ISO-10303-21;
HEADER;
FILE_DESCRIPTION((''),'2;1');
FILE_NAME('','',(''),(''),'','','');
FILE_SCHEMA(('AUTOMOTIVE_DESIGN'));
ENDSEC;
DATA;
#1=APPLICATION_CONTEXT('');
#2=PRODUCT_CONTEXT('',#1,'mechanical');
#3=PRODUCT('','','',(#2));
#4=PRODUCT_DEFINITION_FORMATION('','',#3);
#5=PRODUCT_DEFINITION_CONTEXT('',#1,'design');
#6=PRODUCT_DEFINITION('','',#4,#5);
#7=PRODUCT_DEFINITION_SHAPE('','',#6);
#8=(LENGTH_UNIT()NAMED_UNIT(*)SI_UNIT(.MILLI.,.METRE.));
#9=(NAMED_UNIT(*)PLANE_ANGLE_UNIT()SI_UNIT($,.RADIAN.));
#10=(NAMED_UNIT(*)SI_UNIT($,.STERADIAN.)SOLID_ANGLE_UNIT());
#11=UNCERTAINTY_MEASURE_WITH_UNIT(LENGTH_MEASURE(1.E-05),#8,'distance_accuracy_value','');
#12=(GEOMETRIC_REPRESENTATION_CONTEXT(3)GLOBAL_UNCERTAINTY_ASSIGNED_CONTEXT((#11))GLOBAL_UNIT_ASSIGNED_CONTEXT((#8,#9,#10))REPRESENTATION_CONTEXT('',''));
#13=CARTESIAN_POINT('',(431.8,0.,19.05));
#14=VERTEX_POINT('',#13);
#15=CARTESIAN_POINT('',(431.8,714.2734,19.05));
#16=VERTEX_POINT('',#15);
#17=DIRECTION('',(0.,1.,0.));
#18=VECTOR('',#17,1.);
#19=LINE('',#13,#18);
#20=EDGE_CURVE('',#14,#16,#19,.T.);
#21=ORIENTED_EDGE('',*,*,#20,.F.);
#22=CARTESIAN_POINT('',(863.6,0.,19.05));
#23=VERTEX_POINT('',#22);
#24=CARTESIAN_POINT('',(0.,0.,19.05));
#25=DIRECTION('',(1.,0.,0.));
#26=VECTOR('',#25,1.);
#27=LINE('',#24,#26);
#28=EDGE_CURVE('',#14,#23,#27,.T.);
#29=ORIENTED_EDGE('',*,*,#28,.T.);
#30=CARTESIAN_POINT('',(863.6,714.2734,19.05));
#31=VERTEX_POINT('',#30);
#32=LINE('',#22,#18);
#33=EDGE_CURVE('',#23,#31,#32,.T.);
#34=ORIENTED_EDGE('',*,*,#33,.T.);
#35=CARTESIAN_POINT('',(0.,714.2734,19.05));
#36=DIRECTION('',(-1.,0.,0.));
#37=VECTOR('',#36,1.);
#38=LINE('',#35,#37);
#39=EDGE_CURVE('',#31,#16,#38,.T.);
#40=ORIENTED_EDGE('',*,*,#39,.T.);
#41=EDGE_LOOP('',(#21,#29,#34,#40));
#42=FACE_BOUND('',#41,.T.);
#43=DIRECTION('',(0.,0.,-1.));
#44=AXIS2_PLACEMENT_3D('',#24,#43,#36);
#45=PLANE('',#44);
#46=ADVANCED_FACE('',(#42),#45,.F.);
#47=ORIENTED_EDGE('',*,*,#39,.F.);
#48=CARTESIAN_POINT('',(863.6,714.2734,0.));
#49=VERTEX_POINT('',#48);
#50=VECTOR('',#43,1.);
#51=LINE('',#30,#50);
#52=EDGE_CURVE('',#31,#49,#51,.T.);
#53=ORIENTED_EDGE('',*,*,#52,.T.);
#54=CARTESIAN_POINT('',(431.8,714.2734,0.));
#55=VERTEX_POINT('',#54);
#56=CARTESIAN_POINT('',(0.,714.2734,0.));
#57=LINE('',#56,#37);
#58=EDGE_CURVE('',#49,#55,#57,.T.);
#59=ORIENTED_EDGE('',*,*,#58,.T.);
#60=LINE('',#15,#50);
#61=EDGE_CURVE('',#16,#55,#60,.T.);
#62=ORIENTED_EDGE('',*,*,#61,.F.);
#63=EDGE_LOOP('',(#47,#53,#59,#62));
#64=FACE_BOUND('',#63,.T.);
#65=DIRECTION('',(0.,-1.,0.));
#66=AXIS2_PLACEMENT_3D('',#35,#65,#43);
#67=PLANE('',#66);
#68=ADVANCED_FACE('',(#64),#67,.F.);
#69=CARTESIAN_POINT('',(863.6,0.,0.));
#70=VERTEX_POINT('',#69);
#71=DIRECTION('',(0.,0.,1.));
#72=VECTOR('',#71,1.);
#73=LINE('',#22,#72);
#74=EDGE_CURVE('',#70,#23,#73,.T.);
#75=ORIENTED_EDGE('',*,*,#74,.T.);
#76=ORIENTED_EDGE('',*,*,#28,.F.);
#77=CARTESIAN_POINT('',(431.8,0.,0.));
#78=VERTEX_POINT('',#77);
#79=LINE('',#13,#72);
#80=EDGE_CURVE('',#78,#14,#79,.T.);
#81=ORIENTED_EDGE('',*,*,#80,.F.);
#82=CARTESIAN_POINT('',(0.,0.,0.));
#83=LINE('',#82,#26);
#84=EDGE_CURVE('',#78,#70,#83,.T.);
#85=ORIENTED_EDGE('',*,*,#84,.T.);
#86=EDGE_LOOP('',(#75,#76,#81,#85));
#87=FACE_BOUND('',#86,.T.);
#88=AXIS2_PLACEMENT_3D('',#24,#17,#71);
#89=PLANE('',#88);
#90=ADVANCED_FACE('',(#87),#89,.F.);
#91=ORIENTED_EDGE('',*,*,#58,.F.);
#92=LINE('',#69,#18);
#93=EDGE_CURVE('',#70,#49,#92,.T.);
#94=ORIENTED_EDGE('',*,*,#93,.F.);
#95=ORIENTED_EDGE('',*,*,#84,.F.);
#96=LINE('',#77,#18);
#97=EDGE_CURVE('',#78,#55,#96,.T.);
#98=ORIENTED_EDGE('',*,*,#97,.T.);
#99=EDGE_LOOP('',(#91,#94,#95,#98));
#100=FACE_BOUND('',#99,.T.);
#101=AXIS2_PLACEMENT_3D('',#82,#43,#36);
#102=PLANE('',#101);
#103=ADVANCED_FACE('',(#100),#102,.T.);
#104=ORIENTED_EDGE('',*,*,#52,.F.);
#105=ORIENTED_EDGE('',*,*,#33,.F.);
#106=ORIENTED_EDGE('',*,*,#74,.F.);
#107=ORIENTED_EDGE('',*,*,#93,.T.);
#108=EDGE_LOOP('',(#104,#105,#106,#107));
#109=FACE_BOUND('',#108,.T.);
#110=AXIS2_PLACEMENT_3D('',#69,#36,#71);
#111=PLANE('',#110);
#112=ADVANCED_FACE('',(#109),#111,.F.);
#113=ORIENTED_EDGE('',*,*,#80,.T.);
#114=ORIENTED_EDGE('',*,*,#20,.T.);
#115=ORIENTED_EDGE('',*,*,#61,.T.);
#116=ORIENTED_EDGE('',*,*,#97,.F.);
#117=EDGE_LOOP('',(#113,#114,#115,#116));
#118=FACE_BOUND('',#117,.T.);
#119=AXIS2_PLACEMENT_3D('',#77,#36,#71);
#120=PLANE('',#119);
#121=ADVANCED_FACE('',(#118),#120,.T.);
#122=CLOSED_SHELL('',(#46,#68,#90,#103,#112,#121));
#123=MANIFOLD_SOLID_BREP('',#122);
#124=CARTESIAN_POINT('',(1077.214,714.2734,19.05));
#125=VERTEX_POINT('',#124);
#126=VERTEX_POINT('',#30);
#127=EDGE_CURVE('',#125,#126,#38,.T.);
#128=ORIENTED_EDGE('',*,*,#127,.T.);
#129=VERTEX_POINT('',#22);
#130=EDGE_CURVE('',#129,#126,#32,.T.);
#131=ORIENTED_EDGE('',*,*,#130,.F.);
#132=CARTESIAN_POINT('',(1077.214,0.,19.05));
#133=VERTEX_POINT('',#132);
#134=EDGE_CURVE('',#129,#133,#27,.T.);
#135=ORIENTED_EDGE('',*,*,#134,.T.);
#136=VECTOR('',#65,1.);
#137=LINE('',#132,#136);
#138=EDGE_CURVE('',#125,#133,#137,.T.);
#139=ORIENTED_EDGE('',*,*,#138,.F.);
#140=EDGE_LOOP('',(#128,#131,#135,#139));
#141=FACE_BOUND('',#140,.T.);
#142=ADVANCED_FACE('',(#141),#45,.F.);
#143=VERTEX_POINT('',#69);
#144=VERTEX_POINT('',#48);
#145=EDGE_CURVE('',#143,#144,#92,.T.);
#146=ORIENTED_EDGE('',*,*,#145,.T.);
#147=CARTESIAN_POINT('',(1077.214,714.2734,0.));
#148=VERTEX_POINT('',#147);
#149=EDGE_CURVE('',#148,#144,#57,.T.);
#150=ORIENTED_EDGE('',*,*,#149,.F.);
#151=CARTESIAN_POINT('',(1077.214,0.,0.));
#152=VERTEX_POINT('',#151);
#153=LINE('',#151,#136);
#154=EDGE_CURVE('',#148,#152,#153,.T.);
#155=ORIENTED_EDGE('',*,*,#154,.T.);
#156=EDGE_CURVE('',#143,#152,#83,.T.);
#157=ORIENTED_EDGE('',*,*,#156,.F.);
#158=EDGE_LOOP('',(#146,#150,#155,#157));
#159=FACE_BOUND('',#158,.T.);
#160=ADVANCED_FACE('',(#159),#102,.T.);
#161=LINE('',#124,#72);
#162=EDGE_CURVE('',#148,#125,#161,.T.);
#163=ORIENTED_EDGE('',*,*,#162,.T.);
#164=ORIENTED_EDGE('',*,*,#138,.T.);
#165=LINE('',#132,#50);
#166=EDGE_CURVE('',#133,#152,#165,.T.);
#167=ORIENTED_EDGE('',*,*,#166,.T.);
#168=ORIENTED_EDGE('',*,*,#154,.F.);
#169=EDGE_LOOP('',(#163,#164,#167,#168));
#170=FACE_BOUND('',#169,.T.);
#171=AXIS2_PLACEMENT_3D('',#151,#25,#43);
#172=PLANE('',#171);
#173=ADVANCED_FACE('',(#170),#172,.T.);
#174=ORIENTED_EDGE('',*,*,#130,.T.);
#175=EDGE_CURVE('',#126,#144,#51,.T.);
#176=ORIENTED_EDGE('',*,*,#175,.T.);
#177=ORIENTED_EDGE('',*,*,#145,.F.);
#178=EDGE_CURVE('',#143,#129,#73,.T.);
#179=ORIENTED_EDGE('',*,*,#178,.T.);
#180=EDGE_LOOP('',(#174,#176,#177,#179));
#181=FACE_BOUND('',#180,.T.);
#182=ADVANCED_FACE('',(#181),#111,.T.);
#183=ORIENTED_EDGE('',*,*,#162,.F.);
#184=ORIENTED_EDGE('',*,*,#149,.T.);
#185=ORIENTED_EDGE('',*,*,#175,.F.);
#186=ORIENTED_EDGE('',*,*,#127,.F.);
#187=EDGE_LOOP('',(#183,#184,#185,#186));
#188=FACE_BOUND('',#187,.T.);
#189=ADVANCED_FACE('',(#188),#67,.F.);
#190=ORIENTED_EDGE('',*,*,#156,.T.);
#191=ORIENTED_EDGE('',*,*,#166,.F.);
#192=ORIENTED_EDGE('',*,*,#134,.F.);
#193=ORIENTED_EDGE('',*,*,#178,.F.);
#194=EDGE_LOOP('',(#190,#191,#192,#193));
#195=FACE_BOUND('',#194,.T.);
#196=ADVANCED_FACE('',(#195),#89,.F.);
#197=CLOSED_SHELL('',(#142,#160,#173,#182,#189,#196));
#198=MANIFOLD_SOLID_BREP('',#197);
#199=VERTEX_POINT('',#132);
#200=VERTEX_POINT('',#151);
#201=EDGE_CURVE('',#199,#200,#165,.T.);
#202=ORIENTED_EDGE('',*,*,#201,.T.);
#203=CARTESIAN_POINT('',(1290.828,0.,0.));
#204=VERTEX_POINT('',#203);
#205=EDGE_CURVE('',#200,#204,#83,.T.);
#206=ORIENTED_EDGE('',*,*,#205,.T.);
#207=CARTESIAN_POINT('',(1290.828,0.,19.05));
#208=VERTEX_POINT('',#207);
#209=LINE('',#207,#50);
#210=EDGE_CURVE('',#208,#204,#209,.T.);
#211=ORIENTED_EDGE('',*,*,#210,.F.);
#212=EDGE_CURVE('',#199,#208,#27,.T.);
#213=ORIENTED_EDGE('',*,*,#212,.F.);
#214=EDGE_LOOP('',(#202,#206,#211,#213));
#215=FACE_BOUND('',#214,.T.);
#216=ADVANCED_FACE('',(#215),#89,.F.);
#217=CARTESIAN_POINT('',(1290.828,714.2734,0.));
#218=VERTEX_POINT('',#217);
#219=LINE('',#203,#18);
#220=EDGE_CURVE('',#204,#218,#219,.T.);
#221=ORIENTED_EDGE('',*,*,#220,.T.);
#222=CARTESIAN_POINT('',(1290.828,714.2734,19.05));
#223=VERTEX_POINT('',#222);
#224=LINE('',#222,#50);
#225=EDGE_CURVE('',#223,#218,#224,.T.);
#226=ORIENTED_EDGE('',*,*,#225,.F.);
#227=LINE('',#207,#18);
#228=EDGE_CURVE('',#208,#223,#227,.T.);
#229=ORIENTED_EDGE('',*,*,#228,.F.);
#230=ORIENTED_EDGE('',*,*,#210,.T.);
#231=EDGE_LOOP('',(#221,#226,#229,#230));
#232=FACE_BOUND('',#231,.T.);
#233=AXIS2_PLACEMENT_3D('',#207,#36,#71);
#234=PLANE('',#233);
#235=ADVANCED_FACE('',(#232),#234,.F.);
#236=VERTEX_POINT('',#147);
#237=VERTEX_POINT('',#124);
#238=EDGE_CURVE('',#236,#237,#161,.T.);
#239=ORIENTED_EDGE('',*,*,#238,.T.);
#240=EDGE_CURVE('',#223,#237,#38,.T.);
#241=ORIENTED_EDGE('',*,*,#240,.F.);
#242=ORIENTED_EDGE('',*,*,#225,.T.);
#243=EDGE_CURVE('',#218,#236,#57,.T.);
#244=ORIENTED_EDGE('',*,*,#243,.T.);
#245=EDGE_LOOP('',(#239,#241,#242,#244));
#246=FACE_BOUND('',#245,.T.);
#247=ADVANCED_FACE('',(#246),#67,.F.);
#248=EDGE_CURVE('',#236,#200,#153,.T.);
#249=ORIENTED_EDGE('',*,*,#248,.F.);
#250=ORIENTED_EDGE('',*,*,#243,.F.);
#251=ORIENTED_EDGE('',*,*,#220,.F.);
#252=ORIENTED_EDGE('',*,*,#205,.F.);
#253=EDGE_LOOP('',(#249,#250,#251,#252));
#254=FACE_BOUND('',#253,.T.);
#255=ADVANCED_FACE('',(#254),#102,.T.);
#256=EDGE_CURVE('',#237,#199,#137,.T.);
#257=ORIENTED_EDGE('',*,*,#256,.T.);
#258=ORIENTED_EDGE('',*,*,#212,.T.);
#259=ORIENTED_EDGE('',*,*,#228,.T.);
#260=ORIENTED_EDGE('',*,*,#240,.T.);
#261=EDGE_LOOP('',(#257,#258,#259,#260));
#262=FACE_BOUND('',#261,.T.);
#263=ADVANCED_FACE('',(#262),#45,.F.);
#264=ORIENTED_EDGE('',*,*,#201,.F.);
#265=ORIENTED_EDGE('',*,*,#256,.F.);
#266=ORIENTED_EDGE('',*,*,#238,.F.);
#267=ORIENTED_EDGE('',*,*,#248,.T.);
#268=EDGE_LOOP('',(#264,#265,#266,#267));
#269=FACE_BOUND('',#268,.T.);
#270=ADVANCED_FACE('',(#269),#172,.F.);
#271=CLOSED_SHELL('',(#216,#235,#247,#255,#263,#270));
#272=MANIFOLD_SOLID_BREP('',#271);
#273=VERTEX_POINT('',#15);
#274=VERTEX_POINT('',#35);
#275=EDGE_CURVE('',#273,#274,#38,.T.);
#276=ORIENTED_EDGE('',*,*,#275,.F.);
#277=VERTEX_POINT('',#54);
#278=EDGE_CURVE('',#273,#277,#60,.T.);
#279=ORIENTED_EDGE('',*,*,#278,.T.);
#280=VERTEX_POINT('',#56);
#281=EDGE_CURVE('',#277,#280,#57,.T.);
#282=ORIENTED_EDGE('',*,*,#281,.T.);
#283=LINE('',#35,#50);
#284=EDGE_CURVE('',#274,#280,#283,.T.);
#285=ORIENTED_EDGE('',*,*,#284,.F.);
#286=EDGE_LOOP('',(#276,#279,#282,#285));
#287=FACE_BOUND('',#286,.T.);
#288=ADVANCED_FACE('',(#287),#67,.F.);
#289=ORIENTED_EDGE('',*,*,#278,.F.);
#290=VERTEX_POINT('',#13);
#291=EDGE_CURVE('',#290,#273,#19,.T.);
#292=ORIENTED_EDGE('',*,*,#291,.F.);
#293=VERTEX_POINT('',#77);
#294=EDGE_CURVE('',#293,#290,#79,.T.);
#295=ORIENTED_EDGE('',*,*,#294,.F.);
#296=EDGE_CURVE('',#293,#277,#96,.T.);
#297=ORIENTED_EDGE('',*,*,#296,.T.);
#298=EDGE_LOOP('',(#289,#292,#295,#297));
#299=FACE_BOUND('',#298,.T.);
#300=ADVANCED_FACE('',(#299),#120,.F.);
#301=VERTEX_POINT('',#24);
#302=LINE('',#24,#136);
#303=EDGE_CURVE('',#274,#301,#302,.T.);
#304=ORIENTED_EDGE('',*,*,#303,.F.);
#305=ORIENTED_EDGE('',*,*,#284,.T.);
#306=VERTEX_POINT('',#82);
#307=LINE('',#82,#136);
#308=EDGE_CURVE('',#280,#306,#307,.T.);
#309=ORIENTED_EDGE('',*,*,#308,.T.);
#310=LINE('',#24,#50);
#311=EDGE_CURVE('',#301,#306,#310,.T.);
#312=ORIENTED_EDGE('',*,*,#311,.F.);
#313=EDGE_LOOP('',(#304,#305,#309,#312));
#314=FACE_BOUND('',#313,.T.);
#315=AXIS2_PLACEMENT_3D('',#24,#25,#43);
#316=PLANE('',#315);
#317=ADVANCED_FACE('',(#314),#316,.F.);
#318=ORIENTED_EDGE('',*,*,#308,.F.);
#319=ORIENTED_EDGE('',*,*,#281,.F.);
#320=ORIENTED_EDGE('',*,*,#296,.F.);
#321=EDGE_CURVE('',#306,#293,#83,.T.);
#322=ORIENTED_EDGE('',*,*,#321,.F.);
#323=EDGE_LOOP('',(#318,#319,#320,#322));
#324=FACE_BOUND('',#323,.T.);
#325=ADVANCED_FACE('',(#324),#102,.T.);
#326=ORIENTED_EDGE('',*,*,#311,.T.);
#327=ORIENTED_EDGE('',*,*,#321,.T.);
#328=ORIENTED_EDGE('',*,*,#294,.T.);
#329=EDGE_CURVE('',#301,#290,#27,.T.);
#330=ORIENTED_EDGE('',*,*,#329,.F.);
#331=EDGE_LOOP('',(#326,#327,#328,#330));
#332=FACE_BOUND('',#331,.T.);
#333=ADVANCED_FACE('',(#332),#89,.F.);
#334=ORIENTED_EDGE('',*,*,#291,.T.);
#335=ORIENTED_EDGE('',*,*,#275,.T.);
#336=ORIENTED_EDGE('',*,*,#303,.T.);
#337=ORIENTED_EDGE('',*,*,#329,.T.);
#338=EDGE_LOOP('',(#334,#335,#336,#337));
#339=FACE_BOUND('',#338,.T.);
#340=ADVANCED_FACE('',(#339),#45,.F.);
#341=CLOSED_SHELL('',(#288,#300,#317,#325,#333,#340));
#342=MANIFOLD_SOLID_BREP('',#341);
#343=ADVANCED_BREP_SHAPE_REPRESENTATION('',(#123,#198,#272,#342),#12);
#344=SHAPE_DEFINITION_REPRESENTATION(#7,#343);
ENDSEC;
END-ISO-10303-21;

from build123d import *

# Parameters (mm, degrees)
SKETCH1_W           = 1290.828
SKETCH1_H           = 714.2734
BOSS_EXTRUDE1_DEPTH = 19.05
SPLIT3_OUTLINE_W    = 714.2734
SPLIT3_OUTLINE_H    = 19.05
SPLIT3_DEPTH        = 431.8
SPLIT3_2_OUTLINE_W  = 714.2734
SPLIT3_2_OUTLINE_H  = 19.05
SPLIT3_2_DEPTH      = 431.8
SPLIT3_START        = 863.6
SPLIT3_3_OUTLINE_W  = 714.2734
SPLIT3_3_OUTLINE_H  = 19.05
SPLIT3_3_DEPTH      = 427.228
SPLIT3_4_OUTLINE_W  = 714.2734
SPLIT3_4_OUTLINE_H  = 19.05
SPLIT3_4_DEPTH      = 427.228


# Read off the part's stored shape, not the designer's step: Split3
with BuildPart() as part:
    # Sketch1 → Boss-Extrude1 (new body)
    with BuildSketch(Plane.XY):
        with Locations((645.414, 357.1367)):
            Rectangle(SKETCH1_W, SKETCH1_H)
    extrude(amount=BOSS_EXTRUDE1_DEPTH)

    # Split3 2 outline → Split3 2 (cut)
    with BuildSketch(Plane.YZ):
        with Locations((357.1367, 9.525)):
            Rectangle(SPLIT3_2_OUTLINE_W, SPLIT3_2_OUTLINE_H)
    extrude(amount=SPLIT3_2_DEPTH, mode=Mode.SUBTRACT)

    # Split3 3 outline → Split3 3 (cut)
    with BuildSketch(Plane.YZ.offset(SPLIT3_START)):
        with Locations((357.1367, 9.525)):
            Rectangle(SPLIT3_3_OUTLINE_W, SPLIT3_3_OUTLINE_H)
    extrude(amount=SPLIT3_3_DEPTH, mode=Mode.SUBTRACT)


with BuildPart() as body_2:
    # Split3 outline → Split3 (new body)
    with BuildSketch(Plane.YZ):
        with Locations((357.1367, 9.525)):
            Rectangle(SPLIT3_OUTLINE_W, SPLIT3_OUTLINE_H)
    extrude(amount=SPLIT3_DEPTH)


with BuildPart() as body_3:
    # Split3 4 outline → Split3 4 (new body)
    with BuildSketch(Plane.YZ.offset(SPLIT3_START)):
        with Locations((357.1367, 9.525)):
            Rectangle(SPLIT3_4_OUTLINE_W, SPLIT3_4_OUTLINE_H)
    extrude(amount=SPLIT3_4_DEPTH)


with BuildPart() as body_4:
    # Split4: the piece on the far side of the plane
    add(body_3.part)
    split(bisect_by=Plane(origin=(1077.214, 0, 0), x_dir=(0, 0, 1), z_dir=(1, 0, 0)), keep=Keep.BOTTOM)


with BuildPart() as body_3_1:
    add(body_3.part)

    # Split4
    split(bisect_by=Plane(origin=(1077.214, 0, 0), x_dir=(0, 0, 1), z_dir=(1, 0, 0)), keep=Keep.TOP)


solid = Compound([part.part, body_2.part, body_4.part, body_3_1.part])
